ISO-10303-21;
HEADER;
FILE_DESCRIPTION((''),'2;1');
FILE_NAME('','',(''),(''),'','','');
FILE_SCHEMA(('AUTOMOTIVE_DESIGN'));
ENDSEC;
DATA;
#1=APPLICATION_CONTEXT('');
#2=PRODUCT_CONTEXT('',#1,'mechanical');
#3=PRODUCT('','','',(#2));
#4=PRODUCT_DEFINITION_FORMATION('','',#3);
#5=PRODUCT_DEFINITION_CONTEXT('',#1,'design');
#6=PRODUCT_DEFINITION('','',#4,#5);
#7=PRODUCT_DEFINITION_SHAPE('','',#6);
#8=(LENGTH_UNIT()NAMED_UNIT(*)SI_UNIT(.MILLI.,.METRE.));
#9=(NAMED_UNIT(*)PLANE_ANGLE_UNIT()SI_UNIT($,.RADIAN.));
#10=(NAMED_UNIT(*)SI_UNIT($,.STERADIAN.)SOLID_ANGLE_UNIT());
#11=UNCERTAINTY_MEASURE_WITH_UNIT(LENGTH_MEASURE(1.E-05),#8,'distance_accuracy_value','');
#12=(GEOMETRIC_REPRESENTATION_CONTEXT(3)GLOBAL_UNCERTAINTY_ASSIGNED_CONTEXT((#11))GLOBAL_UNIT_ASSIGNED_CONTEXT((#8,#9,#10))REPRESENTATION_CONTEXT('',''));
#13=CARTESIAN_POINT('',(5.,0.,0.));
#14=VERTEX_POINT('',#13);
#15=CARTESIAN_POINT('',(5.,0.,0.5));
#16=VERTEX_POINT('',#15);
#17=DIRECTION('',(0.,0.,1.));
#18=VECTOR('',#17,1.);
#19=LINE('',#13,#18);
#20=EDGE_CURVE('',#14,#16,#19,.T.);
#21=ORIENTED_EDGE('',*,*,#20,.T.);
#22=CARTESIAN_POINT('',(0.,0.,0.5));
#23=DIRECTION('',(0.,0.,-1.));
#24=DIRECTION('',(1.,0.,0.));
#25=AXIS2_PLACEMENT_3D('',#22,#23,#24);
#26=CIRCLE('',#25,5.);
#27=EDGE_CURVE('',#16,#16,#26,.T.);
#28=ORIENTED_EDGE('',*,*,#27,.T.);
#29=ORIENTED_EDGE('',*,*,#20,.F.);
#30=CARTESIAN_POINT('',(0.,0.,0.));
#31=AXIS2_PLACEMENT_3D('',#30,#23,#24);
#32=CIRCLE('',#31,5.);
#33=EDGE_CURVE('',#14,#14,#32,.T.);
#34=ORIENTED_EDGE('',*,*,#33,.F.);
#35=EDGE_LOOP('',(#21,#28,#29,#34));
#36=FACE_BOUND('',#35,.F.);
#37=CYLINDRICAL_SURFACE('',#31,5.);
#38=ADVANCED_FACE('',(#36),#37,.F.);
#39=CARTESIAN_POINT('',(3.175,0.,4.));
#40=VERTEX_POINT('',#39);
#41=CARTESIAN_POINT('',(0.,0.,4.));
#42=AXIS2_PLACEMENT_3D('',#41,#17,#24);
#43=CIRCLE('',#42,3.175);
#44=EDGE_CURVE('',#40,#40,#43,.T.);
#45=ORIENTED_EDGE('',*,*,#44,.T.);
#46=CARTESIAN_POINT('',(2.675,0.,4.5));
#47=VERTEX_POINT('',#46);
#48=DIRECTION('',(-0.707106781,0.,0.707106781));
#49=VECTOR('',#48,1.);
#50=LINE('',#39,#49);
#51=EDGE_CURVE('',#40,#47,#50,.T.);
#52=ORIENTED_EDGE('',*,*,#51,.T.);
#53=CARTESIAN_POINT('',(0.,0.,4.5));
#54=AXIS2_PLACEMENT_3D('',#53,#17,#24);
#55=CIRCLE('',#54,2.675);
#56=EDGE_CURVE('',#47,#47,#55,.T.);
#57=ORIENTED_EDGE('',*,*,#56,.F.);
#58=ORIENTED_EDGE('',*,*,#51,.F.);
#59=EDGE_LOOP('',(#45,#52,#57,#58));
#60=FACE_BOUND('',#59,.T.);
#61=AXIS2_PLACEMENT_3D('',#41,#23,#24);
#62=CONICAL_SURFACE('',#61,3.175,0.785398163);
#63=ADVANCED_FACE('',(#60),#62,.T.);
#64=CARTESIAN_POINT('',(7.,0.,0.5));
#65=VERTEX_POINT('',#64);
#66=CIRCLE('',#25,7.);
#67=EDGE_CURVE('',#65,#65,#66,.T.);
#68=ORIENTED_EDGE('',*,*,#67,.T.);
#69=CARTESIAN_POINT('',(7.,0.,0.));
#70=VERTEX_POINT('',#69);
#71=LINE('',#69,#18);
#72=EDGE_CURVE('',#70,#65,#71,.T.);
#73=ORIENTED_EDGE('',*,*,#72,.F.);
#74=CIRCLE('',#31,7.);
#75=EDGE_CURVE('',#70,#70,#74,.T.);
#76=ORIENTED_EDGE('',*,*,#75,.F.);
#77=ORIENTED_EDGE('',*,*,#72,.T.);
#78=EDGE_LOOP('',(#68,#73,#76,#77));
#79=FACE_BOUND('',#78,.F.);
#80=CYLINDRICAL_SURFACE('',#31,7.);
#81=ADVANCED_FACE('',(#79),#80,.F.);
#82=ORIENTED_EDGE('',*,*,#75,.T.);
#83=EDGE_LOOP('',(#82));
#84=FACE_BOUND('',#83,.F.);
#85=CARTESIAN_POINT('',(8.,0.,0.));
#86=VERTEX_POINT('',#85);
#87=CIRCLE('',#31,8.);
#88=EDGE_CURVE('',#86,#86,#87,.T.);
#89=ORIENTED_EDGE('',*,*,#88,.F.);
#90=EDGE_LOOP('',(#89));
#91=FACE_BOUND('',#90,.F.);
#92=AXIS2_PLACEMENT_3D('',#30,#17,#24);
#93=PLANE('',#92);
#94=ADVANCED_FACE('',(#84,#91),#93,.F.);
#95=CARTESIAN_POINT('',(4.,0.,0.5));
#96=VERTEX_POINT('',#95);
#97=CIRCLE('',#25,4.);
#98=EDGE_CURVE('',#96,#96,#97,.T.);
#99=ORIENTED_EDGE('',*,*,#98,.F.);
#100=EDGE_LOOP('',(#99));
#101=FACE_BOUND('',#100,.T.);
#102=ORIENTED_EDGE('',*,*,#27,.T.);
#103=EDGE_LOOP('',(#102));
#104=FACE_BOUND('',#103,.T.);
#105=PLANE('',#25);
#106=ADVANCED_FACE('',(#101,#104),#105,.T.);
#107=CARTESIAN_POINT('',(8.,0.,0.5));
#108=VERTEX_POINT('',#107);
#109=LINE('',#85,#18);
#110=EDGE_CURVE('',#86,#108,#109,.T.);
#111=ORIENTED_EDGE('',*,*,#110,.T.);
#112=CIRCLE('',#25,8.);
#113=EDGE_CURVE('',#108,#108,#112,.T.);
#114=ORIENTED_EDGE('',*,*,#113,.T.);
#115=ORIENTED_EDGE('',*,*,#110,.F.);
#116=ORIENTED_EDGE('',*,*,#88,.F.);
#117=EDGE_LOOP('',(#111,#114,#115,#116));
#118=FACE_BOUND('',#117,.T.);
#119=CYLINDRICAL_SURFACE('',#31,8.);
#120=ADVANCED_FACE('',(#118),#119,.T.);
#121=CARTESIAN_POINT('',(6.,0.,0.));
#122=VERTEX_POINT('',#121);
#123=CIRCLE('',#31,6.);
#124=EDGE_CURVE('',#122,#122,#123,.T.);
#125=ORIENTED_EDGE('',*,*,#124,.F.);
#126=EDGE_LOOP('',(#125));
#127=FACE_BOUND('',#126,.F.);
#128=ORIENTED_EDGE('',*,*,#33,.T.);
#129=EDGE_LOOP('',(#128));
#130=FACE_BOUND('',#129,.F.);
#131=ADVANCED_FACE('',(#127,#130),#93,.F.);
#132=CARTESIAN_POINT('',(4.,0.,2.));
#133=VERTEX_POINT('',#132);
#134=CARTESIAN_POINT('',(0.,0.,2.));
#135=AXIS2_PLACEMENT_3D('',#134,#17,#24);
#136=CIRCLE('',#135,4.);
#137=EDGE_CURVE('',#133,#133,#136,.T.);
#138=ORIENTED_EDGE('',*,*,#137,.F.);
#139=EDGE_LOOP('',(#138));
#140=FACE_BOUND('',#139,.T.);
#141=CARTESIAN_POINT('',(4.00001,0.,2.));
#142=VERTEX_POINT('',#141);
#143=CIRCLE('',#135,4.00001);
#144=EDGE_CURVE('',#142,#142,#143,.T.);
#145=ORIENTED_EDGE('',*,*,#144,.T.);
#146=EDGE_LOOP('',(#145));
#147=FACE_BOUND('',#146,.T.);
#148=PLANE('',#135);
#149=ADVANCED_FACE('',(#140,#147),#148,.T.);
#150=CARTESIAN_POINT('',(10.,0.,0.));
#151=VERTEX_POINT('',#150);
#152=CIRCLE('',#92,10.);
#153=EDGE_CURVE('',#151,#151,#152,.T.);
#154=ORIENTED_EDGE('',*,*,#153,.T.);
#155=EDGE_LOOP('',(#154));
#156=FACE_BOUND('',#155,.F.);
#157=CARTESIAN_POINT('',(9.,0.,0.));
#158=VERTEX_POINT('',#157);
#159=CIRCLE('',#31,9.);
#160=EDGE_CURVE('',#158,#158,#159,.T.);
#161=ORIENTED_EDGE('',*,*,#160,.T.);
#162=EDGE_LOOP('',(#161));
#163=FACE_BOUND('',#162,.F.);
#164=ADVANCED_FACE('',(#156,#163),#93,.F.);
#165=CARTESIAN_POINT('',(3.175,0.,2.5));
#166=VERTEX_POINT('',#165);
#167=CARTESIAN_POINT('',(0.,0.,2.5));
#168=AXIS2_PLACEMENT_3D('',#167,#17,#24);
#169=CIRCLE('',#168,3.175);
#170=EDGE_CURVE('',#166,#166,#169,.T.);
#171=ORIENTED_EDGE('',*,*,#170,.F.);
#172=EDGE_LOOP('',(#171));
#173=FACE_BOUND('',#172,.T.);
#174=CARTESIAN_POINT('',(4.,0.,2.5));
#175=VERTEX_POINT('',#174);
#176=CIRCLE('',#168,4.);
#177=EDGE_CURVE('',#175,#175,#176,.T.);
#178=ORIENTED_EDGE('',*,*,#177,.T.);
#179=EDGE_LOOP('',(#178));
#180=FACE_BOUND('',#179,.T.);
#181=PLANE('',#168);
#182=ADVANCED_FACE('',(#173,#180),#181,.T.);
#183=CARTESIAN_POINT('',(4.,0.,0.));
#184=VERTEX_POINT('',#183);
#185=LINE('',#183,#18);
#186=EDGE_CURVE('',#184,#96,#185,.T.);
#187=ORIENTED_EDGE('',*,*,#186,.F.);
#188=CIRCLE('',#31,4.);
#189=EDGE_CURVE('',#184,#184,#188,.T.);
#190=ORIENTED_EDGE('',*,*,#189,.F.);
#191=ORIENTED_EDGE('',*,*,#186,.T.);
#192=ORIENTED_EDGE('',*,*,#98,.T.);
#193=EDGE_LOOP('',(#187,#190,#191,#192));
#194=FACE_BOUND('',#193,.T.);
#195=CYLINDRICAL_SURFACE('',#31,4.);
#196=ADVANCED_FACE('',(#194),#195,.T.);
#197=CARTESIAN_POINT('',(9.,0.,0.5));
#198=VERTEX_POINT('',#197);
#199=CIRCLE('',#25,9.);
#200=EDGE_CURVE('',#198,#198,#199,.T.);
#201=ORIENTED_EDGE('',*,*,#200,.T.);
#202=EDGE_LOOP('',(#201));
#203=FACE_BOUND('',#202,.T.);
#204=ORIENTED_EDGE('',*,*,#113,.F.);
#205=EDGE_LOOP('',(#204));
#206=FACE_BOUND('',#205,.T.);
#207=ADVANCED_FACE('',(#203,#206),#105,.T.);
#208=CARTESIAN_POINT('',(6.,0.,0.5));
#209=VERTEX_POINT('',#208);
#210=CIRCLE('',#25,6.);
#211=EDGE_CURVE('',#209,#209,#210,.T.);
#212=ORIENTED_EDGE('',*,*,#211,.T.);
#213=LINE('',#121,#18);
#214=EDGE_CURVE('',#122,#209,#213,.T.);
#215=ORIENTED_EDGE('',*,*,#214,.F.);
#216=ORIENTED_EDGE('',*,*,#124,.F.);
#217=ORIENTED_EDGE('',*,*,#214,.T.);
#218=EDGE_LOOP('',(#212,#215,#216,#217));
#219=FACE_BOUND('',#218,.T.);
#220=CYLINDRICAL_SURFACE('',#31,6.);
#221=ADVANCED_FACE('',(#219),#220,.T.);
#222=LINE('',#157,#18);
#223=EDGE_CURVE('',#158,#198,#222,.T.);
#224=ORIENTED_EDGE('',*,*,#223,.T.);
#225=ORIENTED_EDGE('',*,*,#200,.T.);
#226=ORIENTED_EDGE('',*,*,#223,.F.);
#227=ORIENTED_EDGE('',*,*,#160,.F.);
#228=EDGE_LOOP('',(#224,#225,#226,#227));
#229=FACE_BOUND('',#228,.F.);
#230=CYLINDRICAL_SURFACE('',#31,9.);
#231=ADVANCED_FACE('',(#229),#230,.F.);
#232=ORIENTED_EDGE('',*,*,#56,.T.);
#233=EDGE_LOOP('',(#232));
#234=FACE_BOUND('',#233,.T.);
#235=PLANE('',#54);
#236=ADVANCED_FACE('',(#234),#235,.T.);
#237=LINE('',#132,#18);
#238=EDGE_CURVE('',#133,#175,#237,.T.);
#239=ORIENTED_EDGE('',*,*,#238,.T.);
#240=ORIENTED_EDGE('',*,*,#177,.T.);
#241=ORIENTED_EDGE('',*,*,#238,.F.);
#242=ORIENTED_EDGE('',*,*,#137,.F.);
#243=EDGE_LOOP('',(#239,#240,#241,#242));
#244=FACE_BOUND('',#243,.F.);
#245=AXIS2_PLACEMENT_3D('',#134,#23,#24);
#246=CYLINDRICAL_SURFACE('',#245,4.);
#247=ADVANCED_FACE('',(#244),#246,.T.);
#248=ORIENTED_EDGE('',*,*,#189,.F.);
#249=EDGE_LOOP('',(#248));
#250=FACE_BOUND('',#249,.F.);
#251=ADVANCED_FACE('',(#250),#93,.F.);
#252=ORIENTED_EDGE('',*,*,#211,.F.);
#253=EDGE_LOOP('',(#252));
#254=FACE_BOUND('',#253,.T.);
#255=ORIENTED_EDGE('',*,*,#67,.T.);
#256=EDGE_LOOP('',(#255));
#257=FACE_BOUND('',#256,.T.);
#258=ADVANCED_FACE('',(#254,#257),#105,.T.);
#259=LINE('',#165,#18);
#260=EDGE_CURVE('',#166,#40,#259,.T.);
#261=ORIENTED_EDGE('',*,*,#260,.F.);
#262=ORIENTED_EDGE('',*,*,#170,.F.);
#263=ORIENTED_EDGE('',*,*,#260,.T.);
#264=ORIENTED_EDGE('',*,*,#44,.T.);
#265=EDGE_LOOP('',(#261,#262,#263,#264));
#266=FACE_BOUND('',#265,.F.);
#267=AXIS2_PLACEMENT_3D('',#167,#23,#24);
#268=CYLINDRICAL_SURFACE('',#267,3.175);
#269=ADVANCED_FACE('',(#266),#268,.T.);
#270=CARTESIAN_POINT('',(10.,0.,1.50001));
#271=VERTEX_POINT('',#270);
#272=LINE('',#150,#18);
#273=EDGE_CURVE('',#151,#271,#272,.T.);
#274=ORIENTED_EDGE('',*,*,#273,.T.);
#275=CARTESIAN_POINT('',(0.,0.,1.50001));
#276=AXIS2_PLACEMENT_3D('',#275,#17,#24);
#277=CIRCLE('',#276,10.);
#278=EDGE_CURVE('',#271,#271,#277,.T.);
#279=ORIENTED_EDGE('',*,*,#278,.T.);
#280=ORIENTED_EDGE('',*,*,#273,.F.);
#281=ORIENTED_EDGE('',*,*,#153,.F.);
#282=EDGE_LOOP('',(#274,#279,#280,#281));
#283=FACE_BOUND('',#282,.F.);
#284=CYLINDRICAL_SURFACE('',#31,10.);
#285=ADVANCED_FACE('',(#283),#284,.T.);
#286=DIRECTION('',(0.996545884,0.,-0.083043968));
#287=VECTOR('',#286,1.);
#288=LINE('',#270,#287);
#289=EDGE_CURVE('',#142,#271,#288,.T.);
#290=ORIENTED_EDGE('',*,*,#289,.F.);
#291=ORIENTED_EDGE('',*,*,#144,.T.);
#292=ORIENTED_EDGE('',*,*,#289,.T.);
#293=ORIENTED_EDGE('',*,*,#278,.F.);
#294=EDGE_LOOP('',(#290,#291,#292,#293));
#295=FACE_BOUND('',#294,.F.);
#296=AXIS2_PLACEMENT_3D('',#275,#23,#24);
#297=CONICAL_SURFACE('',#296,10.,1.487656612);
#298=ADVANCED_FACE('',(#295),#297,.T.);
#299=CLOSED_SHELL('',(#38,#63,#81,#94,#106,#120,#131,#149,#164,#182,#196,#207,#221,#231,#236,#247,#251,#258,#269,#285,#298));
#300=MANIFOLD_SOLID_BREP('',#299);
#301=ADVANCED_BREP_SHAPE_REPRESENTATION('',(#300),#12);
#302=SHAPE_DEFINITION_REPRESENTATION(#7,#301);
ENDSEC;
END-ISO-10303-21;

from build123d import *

# Parameters (mm, degrees)
F0_R     = 10
F1_DEPTH = 2
F2_R     = 4
F3_DEPTH = 0.5
F4_R     = 3.175
F5_DEPTH = 2
F6_R     = 9
F6_R_2   = 8
F6_R_3   = 7
F6_R_4   = 6
F6_R_5   = 5
F6_R_6   = 4
F7_DEPTH = 0.5
F8_SIZE2 = 0.49999
F8_SIZE  = 5.99999
F9_SIZE  = 0.5


# Not quite as in the source:
# - a fillet or chamfer is up to 0.001 mm smaller than in the source, because OpenCascade refuses the exact size


with BuildPart() as f1:
    # F0 (on Top) → F1 (new body)
    with BuildSketch(Plane.XY):
        Circle(F0_R)
    extrude(amount=F1_DEPTH)

    # F2 (on face) → F3 (join)
    with BuildSketch(Plane.XY.offset(2)):
        Circle(F2_R)
    extrude(amount=F3_DEPTH)

    # F4 (on face) → F5 (join)
    with BuildSketch(Plane.XY.offset(2.5)):
        Circle(F4_R)
    extrude(amount=F5_DEPTH)

    # F6 (on face) → F7 (cut)
    with BuildSketch(Plane(origin=(0, 0, 0), x_dir=(1, 0, 0), z_dir=(0, 0, -1))):
        Circle(F6_R)
        Circle(F6_R_2, mode=Mode.SUBTRACT)
        Circle(F6_R_3)
        Circle(F6_R_4, mode=Mode.SUBTRACT)
        Circle(F6_R_5)
        Circle(F6_R_6, mode=Mode.SUBTRACT)
    extrude(amount=-F7_DEPTH, mode=Mode.SUBTRACT)

    # F8 (size 6 and 0.5 in the source; OpenCascade refuses exactly that, so slightly less here)
    f8_edges = [f1.edges().sort_by_distance(p)[0] for p in [
        (-10, 0, 2),
    ]]
    f8_side = f1.faces().sort_by_distance((-9.717157, 0, 2))[0]
    chamfer(f8_edges, length=F8_SIZE, length2=F8_SIZE2, reference=f8_side)

    # F9
    f9_edges = [f1.edges().sort_by_distance(p)[0] for p in [
        (-3.175, 0, 4.5),
    ]]
    chamfer(f9_edges, length=F9_SIZE)


solid = f1.part
